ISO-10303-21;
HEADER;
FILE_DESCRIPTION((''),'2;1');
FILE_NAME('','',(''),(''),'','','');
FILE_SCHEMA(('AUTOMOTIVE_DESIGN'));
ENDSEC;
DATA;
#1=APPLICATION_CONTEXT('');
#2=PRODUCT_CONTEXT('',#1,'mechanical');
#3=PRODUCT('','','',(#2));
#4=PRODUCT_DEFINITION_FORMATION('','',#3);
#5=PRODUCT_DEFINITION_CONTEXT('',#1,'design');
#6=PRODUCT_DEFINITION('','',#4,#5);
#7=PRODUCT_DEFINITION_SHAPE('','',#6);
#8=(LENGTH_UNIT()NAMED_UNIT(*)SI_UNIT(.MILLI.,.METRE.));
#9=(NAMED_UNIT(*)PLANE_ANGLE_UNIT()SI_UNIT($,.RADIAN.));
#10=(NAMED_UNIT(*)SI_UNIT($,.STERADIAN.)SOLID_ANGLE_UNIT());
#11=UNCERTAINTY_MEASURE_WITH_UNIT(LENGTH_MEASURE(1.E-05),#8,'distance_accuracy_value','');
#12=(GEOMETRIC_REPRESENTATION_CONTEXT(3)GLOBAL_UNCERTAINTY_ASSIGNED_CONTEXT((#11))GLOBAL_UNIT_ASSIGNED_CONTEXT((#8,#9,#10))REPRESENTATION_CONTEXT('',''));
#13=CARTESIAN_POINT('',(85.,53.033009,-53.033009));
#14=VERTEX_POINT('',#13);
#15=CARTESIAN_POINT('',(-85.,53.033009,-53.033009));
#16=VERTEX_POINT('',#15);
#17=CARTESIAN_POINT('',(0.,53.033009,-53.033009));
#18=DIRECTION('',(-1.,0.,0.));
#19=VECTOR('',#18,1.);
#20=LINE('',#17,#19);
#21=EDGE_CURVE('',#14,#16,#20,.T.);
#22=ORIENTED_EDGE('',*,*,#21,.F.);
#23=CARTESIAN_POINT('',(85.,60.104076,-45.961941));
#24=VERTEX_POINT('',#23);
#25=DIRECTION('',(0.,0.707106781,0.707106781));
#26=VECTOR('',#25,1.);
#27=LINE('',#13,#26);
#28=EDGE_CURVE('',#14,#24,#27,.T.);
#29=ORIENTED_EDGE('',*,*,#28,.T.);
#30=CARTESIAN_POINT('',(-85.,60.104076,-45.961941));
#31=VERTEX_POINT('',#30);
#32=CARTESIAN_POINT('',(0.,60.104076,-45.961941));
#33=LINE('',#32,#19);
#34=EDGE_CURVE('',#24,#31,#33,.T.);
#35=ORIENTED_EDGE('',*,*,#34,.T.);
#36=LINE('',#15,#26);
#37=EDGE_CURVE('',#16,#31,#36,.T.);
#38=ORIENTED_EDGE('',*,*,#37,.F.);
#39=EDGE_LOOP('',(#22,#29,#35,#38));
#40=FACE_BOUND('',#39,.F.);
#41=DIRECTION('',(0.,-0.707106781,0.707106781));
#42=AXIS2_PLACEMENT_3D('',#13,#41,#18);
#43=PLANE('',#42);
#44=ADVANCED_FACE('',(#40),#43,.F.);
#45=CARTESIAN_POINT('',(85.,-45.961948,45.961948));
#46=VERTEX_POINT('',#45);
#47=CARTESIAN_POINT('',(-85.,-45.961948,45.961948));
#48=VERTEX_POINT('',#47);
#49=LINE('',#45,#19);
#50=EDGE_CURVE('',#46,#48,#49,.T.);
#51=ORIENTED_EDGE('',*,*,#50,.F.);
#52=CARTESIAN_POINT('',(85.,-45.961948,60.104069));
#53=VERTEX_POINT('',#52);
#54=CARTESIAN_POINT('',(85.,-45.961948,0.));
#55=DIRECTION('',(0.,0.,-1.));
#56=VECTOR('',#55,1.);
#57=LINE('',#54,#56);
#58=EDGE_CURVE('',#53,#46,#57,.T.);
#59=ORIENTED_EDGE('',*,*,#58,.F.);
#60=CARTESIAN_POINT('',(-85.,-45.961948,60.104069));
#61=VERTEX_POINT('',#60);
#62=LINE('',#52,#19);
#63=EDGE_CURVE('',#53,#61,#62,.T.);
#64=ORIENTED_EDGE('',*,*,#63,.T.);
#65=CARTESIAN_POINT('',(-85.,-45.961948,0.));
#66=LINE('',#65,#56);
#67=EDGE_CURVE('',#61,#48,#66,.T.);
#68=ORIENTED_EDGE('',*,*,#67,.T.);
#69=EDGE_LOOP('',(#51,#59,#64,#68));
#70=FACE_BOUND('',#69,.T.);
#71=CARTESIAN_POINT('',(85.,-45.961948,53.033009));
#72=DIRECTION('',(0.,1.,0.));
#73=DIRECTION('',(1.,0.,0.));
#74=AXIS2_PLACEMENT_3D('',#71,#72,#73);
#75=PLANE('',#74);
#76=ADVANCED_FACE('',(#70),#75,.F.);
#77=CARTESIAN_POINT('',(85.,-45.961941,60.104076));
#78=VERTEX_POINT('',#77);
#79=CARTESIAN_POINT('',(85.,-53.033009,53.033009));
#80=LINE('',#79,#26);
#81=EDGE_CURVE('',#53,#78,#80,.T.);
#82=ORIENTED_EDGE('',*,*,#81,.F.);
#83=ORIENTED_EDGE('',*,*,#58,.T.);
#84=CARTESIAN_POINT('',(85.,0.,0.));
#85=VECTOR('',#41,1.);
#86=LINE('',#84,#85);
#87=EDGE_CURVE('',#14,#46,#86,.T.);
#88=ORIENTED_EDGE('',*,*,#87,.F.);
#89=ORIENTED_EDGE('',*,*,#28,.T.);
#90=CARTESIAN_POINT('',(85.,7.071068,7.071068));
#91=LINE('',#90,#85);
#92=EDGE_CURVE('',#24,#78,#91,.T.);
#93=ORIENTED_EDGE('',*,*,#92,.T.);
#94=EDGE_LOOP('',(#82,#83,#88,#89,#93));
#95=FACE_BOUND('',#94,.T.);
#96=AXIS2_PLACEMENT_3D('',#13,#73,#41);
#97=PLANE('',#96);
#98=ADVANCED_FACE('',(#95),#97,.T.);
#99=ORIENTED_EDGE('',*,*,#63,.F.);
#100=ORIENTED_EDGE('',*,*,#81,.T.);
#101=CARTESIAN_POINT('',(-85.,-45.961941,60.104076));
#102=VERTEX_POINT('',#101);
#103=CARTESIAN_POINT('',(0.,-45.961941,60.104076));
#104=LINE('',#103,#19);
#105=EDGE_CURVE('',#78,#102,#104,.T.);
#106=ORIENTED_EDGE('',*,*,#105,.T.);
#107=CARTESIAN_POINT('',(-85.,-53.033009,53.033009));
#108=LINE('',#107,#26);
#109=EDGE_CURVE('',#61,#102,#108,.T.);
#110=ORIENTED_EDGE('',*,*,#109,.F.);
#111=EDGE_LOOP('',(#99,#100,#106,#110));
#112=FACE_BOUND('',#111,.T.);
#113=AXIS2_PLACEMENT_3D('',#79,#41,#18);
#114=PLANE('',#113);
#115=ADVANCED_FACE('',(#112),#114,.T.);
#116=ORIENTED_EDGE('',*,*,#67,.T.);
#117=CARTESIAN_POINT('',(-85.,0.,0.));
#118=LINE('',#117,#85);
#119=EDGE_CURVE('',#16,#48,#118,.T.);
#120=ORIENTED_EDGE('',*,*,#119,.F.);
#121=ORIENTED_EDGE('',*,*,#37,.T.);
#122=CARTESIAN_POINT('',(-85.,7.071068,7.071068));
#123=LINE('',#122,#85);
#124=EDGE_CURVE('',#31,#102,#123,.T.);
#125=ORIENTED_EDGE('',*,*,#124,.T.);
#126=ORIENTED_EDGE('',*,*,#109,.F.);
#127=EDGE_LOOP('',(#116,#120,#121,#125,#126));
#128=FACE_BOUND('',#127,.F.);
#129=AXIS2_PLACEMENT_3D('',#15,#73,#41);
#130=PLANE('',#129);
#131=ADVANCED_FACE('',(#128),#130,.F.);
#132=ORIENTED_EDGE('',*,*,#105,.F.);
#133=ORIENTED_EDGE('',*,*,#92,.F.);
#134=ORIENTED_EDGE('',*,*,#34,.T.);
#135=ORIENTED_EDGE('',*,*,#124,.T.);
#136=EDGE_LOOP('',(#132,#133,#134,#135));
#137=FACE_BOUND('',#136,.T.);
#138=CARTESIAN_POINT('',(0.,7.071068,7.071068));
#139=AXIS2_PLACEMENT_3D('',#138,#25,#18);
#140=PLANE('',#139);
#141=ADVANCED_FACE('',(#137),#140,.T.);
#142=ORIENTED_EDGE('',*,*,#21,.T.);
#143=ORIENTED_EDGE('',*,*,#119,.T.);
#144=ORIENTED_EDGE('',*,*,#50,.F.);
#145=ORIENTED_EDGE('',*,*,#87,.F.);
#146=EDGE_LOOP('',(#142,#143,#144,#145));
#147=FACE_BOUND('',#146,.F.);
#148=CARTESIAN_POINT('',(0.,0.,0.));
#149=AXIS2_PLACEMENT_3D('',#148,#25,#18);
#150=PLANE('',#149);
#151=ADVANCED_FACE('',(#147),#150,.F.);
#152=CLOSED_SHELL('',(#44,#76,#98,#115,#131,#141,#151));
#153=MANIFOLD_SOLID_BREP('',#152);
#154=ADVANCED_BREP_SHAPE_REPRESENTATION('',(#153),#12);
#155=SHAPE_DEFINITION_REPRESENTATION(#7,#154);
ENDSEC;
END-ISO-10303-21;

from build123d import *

# Parameters (mm, degrees)
F1_W     = 170
F1_H     = 150
F2_DEPTH = 10
F3_SIZE  = 9.99999


# Not quite as in the source:
# - a fillet or chamfer is up to 0.001 mm smaller than in the source, because OpenCascade refuses the exact size


with BuildPart() as f2:
    # F1 (on face) → F2 (new body)
    with BuildSketch(Plane(origin=(0, 0, 0), x_dir=(-1, 0, 0), z_dir=(0, 0.7071067812, 0.7071067812))):
        Rectangle(F1_W, F1_H)
    extrude(amount=F2_DEPTH)

    # F3 (size 10 in the source; OpenCascade refuses exactly that, so slightly less here)
    f3_edges = [f2.edges().sort_by_distance(p)[0] for p in [
        (0, -53.033009, 53.033009),
    ]]
    chamfer(f3_edges, length=F3_SIZE)


solid = f2.part
